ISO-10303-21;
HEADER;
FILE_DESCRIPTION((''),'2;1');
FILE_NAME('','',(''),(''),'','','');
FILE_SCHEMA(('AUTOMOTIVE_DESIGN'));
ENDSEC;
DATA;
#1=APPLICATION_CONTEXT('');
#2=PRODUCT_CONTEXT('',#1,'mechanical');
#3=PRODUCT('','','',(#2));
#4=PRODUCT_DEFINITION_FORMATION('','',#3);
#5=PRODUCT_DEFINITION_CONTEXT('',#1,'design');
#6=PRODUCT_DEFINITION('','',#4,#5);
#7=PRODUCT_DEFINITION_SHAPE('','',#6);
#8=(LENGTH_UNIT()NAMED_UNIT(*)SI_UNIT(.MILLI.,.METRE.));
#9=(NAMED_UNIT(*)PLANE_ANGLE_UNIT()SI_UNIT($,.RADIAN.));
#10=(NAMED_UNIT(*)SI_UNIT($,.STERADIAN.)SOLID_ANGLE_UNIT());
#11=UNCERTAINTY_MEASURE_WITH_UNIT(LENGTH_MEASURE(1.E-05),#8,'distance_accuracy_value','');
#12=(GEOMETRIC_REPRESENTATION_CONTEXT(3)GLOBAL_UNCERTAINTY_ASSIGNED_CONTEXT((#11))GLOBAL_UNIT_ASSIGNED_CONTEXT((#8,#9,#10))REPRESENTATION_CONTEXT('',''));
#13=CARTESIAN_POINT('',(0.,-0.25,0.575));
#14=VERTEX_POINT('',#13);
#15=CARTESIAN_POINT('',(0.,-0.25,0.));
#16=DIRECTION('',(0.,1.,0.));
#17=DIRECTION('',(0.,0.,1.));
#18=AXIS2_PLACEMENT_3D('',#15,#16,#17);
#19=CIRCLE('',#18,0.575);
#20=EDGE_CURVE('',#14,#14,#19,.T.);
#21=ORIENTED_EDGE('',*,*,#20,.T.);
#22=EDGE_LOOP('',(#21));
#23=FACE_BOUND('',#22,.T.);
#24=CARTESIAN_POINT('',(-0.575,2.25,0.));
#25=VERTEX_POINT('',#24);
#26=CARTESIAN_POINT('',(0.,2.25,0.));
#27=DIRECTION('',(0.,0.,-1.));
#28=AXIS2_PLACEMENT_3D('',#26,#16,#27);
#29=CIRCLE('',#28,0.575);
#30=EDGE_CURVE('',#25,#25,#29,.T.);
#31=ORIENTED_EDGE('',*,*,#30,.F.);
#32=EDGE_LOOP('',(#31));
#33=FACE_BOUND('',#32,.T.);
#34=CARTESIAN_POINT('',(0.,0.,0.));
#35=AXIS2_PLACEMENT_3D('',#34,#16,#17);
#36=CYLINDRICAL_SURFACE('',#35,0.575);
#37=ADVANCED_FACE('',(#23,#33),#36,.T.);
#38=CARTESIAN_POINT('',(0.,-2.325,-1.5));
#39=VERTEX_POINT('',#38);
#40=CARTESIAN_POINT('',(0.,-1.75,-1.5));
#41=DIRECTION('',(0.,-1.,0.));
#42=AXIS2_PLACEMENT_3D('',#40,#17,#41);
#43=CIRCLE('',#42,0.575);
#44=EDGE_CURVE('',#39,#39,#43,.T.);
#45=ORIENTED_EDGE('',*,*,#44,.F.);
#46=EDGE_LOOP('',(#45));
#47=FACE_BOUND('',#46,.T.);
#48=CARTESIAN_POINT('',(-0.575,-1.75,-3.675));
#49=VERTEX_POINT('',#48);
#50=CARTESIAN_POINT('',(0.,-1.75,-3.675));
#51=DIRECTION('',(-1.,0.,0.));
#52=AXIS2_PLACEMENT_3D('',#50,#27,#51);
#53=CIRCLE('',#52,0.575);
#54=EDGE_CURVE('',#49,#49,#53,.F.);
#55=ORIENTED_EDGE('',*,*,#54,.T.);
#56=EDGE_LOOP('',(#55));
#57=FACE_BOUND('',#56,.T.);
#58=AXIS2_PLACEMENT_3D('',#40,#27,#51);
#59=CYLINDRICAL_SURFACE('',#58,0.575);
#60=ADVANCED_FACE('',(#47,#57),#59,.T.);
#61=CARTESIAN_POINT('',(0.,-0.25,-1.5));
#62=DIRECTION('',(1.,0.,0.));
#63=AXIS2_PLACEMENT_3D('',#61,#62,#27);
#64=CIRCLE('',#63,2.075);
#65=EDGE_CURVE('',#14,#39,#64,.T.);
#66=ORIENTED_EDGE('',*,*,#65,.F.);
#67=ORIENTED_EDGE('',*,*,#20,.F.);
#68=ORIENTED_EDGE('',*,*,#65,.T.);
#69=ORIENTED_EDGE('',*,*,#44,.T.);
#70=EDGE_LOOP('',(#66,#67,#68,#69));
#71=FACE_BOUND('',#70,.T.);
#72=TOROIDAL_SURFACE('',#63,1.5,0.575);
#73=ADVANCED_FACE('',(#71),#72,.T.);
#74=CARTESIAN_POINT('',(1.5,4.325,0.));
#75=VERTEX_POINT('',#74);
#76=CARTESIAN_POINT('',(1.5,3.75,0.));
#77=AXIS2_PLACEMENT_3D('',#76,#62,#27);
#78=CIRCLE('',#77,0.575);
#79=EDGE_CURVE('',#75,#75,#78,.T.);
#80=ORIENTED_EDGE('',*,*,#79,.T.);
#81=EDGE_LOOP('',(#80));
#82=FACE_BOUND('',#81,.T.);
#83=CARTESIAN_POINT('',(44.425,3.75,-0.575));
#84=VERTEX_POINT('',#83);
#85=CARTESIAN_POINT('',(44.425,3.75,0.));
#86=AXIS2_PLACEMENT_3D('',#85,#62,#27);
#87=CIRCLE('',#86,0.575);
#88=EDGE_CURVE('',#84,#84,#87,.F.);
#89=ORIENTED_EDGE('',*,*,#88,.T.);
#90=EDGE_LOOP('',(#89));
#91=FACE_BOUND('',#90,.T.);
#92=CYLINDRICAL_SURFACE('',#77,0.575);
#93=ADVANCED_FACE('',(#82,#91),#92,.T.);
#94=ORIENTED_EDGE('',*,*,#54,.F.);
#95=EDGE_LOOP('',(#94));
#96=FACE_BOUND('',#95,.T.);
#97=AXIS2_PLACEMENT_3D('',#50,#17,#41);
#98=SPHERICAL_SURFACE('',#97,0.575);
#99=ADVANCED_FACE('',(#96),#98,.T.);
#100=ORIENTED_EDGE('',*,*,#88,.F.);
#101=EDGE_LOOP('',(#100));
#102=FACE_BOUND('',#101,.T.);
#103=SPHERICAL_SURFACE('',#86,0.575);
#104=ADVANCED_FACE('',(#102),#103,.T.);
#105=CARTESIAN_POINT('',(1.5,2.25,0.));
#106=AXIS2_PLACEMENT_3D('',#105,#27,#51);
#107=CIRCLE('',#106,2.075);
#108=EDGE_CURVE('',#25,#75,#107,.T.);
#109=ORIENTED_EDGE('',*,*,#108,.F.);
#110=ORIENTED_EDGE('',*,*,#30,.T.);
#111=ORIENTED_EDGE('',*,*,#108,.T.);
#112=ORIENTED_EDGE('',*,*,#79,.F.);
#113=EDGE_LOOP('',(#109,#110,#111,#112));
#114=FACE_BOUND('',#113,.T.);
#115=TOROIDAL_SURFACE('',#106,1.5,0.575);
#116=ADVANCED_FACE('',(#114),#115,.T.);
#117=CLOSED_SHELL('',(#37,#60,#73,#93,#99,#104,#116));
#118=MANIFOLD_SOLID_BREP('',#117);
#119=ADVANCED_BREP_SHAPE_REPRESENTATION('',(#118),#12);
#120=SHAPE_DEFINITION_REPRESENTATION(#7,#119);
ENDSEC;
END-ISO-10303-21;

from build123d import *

# Parameters (mm, degrees)
SKICA4_R                       = 0.575
T_HNOUT_PO_K_IVCE2_OUTLINE_R   = 0.575
T_HNOUT_PO_K_IVCE2_ANGLE       = 90
T_HNOUT_START                  = -0.2500001
T_HNOUT_PO_K_IVCE2_2_OUTLINE_R = 0.575
T_HNOUT_PO_K_IVCE2_2_DEPTH     = 2.5000002
T_HNOUT_START_2                = -4.25
T_HNOUT_PO_K_IVCE2_3_OUTLINE_R = 0.575
T_HNOUT_PO_K_IVCE2_3_DEPTH     = 2.7500001
ZAOBLIT1_R                     = 0.575


with BuildPart() as part:
    # Táhnout po křivce1: sweep along a path in Skica1
    with BuildLine(Plane.XY) as t_hnout_po_k_ivce1_path:
        Line((0, 0), (0, 2.25))
        ThreePointArc((0, 2.25), (0.439339828, 3.310660172), (1.5, 3.75))
        Line((1.5, 3.75), (45, 3.75))
    # Skica4 → Táhnout po křivce1 (sweep)
    with BuildSketch(Plane(origin=(45, 0, 0), x_dir=(0, 0, -1), z_dir=(1, 0, 0))):
        with Locations((0, 3.75)):
            Circle(SKICA4_R)
    sweep(path=t_hnout_po_k_ivce1_path.line)



with BuildPart() as body_2:
    # Táhnout po křivce2: read off the stored shape, not the designer's step
    # Táhnout po křivce2 outline → Táhnout po křivce2 (revolve)
    with BuildSketch(Plane(origin=(0, -0.25, -1.5), x_dir=(0, 0, 1), z_dir=(0, 1, 0))):
        with Locations((1.5, 0)):
            Circle(T_HNOUT_PO_K_IVCE2_OUTLINE_R)
    revolve(axis=Axis((0, -0.25, -1.5), (1, 0, 0)), revolution_arc=T_HNOUT_PO_K_IVCE2_ANGLE)


with BuildPart() as part_1:
    add(part.part)

    add(body_2.part)  # T_hnout po k_ivce2 2 merges body 2
    # T_hnout po k_ivce2 2 outline → T_hnout po k_ivce2 2 (add)
    with BuildSketch(Plane(origin=(0, 0, 0), x_dir=(1, 0, 0), z_dir=(0, 1, 0)).offset(T_HNOUT_START)):
        Circle(T_HNOUT_PO_K_IVCE2_2_OUTLINE_R)
    extrude(amount=T_HNOUT_PO_K_IVCE2_2_DEPTH)

    # T_hnout po k_ivce2 3 outline → T_hnout po k_ivce2 3 (add)
    with BuildSketch(Plane.XY.offset(T_HNOUT_START_2)):
        with Locations((0, -1.75)):
            Circle(T_HNOUT_PO_K_IVCE2_3_OUTLINE_R)
    extrude(amount=T_HNOUT_PO_K_IVCE2_3_DEPTH)

    # Zaoblit1
    zaoblit1_edges = [part_1.edges().sort_by_distance(p)[0] for p in [
        (45, 3.75, 0.575),
        (-0.575, -1.75, -4.25),
    ]]
    fillet(zaoblit1_edges, radius=ZAOBLIT1_R)


solid = part_1.part
